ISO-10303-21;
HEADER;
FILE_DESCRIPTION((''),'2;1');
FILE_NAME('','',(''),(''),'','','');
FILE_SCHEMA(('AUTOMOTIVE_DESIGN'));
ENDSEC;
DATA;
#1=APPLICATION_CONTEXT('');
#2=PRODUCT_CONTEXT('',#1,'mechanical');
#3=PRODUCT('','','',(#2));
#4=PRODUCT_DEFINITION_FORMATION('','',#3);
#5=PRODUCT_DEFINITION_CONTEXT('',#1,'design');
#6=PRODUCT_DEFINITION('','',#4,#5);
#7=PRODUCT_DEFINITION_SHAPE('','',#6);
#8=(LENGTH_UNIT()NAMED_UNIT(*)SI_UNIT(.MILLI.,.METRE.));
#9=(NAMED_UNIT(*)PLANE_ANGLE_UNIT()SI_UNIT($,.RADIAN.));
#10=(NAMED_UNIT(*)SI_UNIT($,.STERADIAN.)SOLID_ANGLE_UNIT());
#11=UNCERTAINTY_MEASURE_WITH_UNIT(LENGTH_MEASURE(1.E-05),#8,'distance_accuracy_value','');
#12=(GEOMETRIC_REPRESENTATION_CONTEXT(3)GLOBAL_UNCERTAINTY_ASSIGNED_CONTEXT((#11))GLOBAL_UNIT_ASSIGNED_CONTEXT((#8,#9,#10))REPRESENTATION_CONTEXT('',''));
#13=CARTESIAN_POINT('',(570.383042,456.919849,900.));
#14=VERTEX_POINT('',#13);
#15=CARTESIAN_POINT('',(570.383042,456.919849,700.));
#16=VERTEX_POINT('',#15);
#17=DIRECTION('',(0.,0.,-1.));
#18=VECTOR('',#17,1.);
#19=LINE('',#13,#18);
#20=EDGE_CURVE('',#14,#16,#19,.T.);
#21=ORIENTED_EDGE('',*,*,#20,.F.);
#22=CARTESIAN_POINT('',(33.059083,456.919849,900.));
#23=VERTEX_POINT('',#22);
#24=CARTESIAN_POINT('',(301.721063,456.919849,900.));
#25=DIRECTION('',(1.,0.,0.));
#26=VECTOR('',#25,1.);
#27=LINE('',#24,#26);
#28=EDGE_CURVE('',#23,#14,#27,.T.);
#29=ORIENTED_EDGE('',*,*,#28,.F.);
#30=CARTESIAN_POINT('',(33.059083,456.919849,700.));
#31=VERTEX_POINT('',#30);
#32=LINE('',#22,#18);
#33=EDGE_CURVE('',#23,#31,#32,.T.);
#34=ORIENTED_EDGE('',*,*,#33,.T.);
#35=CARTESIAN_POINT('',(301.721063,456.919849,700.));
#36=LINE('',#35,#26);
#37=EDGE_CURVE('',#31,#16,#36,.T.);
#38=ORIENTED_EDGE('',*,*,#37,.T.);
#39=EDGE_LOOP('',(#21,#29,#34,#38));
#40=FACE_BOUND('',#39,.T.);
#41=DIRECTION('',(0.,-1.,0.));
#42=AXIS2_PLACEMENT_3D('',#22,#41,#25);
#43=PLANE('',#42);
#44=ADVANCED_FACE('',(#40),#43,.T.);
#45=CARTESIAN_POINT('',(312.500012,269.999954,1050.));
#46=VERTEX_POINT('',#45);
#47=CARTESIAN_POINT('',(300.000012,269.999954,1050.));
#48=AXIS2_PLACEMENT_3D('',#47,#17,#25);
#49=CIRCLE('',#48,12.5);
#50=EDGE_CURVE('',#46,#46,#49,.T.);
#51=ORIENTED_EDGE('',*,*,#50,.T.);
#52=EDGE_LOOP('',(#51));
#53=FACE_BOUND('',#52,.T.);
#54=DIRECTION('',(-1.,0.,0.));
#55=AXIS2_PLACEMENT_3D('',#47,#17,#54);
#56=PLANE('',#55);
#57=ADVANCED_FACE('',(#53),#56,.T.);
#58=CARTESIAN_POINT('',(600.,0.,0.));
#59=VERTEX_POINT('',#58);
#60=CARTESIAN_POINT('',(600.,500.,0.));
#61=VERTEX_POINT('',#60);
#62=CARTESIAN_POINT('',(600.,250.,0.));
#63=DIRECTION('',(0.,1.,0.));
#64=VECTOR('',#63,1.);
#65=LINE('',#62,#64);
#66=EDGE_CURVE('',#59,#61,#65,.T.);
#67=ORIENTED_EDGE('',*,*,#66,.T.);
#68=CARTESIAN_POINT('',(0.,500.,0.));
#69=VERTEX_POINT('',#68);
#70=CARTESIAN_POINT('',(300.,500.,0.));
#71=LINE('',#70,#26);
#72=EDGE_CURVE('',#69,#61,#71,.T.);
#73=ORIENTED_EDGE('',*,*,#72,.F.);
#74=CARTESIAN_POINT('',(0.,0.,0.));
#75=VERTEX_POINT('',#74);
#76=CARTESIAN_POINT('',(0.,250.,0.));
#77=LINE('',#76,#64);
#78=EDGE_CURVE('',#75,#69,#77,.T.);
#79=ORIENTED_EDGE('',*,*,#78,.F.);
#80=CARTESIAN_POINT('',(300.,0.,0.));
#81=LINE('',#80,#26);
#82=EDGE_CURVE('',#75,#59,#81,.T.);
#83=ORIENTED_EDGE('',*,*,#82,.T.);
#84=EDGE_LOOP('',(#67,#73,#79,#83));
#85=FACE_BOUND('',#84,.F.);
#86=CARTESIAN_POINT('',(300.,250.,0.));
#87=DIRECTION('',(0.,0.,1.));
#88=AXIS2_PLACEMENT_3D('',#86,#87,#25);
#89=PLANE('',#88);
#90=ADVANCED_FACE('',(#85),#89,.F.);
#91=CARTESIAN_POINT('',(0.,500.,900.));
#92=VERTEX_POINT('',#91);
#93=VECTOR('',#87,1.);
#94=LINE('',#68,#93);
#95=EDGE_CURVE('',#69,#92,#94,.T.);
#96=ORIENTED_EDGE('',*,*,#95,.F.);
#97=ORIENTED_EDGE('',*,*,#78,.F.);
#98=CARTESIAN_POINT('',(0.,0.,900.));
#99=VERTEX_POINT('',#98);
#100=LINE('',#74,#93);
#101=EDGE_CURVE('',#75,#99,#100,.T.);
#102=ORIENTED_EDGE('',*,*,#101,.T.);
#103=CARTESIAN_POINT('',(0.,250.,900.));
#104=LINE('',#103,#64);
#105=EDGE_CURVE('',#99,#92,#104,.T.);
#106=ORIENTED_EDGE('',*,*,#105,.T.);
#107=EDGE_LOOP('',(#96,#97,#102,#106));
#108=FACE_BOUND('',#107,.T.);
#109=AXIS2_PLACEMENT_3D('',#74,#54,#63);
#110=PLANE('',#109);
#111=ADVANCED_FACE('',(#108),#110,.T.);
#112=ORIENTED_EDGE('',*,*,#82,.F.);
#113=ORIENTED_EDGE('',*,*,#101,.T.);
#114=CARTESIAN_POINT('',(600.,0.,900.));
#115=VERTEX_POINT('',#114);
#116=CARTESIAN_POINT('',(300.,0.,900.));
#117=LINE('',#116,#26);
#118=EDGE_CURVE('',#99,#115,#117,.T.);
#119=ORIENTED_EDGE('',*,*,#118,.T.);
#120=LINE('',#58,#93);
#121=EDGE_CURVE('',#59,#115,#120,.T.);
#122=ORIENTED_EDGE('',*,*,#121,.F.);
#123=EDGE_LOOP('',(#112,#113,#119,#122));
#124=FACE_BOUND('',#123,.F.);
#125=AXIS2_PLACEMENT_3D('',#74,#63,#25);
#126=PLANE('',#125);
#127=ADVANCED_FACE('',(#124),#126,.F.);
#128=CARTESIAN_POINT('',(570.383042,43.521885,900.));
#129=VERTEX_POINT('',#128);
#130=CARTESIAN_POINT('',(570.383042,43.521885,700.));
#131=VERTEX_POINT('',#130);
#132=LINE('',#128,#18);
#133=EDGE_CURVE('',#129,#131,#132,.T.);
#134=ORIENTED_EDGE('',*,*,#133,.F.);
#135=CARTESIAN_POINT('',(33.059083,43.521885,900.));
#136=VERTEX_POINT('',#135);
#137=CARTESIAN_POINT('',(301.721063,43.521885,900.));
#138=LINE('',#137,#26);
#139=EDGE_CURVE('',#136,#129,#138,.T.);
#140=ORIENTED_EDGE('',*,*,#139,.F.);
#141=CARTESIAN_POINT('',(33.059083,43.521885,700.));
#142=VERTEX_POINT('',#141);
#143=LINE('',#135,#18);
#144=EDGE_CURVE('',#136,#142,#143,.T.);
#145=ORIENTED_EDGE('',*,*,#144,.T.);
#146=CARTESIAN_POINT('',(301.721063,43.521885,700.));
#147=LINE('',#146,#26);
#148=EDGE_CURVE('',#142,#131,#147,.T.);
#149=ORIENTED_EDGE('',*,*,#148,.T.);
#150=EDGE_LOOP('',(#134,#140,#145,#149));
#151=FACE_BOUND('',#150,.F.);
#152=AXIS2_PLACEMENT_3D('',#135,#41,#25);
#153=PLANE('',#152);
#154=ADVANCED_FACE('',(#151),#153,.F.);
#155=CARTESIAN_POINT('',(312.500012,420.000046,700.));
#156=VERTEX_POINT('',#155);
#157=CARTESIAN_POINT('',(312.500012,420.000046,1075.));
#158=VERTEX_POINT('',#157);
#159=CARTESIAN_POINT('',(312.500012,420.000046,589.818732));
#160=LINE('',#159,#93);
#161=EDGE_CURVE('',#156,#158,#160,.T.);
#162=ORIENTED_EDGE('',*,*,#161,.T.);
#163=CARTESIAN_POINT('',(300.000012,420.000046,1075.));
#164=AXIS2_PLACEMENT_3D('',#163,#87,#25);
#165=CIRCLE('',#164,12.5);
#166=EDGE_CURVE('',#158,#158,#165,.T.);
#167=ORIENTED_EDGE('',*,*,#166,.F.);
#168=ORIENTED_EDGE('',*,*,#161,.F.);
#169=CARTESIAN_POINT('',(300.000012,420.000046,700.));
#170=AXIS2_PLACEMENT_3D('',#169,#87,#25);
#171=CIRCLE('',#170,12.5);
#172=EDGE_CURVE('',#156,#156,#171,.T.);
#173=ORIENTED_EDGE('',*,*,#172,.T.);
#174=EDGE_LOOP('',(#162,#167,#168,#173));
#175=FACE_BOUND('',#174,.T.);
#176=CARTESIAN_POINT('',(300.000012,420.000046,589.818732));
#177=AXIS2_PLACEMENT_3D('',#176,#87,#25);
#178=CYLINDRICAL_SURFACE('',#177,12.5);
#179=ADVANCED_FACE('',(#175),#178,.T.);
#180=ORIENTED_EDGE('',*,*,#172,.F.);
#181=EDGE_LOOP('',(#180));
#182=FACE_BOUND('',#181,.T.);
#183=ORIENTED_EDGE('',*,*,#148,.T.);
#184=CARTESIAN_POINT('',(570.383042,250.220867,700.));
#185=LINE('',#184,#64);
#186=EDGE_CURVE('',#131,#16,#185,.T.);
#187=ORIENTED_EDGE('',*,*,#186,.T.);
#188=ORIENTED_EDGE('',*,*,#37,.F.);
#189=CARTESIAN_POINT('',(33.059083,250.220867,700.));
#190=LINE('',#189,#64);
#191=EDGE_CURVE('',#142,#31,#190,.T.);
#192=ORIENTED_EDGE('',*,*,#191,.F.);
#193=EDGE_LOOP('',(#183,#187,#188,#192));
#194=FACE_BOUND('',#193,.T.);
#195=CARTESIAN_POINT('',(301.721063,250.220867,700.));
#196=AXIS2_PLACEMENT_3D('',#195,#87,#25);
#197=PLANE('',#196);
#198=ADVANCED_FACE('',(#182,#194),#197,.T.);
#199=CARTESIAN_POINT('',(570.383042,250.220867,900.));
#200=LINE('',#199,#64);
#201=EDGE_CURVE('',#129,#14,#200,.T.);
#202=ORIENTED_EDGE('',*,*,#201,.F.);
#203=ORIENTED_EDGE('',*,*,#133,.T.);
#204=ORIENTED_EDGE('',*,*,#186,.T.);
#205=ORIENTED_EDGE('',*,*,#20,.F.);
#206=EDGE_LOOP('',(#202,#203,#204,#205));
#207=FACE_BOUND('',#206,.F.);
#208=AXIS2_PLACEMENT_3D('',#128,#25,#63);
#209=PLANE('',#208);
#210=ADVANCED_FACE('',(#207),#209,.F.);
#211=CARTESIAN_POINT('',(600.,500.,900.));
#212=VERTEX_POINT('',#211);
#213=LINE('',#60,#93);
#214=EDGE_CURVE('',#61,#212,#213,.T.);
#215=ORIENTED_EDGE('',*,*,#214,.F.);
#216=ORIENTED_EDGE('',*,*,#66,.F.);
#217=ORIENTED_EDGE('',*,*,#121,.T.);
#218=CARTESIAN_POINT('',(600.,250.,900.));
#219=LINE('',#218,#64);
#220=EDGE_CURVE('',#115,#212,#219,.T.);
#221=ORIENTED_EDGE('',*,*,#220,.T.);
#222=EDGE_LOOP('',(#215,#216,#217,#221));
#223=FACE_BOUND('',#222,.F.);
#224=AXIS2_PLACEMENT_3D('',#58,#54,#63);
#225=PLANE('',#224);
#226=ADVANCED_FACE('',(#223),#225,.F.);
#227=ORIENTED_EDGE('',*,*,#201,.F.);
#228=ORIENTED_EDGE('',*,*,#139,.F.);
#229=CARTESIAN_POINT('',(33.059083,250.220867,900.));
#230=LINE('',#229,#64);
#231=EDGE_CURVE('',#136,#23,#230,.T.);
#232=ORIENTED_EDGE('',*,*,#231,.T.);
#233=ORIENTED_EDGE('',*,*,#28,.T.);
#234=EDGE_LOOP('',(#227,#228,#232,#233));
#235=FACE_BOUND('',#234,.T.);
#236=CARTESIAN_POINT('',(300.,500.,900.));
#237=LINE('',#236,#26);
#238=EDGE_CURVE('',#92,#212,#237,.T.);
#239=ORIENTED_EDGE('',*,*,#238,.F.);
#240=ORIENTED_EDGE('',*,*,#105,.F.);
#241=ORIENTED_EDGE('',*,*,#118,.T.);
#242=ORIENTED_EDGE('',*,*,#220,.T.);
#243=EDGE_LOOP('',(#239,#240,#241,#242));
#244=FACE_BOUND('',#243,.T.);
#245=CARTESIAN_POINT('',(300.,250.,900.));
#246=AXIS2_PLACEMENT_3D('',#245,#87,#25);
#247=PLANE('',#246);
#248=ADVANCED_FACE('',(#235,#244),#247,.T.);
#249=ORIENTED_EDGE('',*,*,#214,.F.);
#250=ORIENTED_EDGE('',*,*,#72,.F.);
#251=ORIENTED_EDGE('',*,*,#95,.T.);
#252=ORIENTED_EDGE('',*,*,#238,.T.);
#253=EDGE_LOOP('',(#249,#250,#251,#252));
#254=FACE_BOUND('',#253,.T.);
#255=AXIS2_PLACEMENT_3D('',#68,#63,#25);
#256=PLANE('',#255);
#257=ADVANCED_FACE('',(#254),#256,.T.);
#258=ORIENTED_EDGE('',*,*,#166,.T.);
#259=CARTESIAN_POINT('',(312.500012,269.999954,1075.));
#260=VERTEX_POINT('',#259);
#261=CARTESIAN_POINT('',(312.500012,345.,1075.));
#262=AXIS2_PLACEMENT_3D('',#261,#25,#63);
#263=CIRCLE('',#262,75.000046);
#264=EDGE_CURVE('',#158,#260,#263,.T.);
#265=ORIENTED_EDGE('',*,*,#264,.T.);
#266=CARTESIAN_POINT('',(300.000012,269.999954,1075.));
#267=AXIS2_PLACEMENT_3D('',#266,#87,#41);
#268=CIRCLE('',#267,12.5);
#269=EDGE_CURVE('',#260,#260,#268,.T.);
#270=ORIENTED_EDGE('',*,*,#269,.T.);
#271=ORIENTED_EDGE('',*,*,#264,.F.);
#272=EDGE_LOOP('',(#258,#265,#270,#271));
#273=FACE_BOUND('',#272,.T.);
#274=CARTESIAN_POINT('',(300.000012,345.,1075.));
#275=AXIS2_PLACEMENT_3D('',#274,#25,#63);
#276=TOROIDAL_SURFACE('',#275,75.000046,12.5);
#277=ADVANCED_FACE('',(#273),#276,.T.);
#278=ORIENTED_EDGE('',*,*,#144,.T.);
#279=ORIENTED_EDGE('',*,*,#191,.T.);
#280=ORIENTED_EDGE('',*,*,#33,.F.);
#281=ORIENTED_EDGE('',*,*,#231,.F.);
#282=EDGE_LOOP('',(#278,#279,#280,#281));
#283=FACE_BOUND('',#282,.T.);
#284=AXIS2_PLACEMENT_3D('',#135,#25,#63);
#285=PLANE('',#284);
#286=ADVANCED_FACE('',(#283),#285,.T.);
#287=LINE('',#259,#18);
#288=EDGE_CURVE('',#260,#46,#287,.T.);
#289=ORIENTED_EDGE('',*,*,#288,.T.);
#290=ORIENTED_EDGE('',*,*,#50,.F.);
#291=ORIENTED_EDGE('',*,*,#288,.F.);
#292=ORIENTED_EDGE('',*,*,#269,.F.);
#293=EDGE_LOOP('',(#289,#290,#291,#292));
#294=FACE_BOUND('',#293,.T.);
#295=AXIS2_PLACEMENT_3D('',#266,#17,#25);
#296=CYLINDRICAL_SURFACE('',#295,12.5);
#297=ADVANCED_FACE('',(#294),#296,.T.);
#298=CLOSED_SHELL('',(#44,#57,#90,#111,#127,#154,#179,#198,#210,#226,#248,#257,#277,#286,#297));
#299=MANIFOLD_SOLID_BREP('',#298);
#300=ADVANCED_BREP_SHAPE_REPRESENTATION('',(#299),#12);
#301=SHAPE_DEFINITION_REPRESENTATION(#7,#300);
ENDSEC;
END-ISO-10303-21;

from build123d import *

# Parameters (mm, degrees)
F0_W     = 600
F0_H     = 500
F1_DEPTH = 900
F2_W     = 537.3239591718
F2_H     = 413.3979640901
F3_DEPTH = 200
F6_R     = 12.5


# Not quite as in the source:
# - a feature names something its author has since deleted; it is built from what else it names


with BuildPart() as f1:
    # F0 (on Top) → F1 (new body)
    with BuildSketch(Plane.XY):
        with Locations((300, 250)):
            Rectangle(F0_W, F0_H)
    extrude(amount=F1_DEPTH)

    # F2 (on face) → F3 (cut)
    with BuildSketch(Plane.XY.offset(900)):
        with Locations((301.7210625112, 250.2208668739)):
            Rectangle(F2_W, F2_H)
    extrude(amount=-F3_DEPTH, mode=Mode.SUBTRACT)

    # F7: sweep along a path in F5
    with BuildLine(Plane(origin=(300, 0, 0), x_dir=(0, -1, 0), z_dir=(-1, 0, 0))) as f7_path:
        Line((-420, 589.8187315079), (-420, 1075))
        ThreePointArc((-420, 1075), (-398.033008589, 1128.033008589), (-345, 1150))
        ThreePointArc((-345, 1150), (-291.966991411, 1128.033008589), (-270, 1075))
        Line((-270, 1075), (-270, 1050))
    # F6 (on face) → F7 (sweep)
    with BuildSketch(Plane.XY.offset(700)):
        with Locations((300.0000119209, 420.0000464916)):
            Circle(F6_R)
    sweep(path=f7_path.line)


solid = f1.part
